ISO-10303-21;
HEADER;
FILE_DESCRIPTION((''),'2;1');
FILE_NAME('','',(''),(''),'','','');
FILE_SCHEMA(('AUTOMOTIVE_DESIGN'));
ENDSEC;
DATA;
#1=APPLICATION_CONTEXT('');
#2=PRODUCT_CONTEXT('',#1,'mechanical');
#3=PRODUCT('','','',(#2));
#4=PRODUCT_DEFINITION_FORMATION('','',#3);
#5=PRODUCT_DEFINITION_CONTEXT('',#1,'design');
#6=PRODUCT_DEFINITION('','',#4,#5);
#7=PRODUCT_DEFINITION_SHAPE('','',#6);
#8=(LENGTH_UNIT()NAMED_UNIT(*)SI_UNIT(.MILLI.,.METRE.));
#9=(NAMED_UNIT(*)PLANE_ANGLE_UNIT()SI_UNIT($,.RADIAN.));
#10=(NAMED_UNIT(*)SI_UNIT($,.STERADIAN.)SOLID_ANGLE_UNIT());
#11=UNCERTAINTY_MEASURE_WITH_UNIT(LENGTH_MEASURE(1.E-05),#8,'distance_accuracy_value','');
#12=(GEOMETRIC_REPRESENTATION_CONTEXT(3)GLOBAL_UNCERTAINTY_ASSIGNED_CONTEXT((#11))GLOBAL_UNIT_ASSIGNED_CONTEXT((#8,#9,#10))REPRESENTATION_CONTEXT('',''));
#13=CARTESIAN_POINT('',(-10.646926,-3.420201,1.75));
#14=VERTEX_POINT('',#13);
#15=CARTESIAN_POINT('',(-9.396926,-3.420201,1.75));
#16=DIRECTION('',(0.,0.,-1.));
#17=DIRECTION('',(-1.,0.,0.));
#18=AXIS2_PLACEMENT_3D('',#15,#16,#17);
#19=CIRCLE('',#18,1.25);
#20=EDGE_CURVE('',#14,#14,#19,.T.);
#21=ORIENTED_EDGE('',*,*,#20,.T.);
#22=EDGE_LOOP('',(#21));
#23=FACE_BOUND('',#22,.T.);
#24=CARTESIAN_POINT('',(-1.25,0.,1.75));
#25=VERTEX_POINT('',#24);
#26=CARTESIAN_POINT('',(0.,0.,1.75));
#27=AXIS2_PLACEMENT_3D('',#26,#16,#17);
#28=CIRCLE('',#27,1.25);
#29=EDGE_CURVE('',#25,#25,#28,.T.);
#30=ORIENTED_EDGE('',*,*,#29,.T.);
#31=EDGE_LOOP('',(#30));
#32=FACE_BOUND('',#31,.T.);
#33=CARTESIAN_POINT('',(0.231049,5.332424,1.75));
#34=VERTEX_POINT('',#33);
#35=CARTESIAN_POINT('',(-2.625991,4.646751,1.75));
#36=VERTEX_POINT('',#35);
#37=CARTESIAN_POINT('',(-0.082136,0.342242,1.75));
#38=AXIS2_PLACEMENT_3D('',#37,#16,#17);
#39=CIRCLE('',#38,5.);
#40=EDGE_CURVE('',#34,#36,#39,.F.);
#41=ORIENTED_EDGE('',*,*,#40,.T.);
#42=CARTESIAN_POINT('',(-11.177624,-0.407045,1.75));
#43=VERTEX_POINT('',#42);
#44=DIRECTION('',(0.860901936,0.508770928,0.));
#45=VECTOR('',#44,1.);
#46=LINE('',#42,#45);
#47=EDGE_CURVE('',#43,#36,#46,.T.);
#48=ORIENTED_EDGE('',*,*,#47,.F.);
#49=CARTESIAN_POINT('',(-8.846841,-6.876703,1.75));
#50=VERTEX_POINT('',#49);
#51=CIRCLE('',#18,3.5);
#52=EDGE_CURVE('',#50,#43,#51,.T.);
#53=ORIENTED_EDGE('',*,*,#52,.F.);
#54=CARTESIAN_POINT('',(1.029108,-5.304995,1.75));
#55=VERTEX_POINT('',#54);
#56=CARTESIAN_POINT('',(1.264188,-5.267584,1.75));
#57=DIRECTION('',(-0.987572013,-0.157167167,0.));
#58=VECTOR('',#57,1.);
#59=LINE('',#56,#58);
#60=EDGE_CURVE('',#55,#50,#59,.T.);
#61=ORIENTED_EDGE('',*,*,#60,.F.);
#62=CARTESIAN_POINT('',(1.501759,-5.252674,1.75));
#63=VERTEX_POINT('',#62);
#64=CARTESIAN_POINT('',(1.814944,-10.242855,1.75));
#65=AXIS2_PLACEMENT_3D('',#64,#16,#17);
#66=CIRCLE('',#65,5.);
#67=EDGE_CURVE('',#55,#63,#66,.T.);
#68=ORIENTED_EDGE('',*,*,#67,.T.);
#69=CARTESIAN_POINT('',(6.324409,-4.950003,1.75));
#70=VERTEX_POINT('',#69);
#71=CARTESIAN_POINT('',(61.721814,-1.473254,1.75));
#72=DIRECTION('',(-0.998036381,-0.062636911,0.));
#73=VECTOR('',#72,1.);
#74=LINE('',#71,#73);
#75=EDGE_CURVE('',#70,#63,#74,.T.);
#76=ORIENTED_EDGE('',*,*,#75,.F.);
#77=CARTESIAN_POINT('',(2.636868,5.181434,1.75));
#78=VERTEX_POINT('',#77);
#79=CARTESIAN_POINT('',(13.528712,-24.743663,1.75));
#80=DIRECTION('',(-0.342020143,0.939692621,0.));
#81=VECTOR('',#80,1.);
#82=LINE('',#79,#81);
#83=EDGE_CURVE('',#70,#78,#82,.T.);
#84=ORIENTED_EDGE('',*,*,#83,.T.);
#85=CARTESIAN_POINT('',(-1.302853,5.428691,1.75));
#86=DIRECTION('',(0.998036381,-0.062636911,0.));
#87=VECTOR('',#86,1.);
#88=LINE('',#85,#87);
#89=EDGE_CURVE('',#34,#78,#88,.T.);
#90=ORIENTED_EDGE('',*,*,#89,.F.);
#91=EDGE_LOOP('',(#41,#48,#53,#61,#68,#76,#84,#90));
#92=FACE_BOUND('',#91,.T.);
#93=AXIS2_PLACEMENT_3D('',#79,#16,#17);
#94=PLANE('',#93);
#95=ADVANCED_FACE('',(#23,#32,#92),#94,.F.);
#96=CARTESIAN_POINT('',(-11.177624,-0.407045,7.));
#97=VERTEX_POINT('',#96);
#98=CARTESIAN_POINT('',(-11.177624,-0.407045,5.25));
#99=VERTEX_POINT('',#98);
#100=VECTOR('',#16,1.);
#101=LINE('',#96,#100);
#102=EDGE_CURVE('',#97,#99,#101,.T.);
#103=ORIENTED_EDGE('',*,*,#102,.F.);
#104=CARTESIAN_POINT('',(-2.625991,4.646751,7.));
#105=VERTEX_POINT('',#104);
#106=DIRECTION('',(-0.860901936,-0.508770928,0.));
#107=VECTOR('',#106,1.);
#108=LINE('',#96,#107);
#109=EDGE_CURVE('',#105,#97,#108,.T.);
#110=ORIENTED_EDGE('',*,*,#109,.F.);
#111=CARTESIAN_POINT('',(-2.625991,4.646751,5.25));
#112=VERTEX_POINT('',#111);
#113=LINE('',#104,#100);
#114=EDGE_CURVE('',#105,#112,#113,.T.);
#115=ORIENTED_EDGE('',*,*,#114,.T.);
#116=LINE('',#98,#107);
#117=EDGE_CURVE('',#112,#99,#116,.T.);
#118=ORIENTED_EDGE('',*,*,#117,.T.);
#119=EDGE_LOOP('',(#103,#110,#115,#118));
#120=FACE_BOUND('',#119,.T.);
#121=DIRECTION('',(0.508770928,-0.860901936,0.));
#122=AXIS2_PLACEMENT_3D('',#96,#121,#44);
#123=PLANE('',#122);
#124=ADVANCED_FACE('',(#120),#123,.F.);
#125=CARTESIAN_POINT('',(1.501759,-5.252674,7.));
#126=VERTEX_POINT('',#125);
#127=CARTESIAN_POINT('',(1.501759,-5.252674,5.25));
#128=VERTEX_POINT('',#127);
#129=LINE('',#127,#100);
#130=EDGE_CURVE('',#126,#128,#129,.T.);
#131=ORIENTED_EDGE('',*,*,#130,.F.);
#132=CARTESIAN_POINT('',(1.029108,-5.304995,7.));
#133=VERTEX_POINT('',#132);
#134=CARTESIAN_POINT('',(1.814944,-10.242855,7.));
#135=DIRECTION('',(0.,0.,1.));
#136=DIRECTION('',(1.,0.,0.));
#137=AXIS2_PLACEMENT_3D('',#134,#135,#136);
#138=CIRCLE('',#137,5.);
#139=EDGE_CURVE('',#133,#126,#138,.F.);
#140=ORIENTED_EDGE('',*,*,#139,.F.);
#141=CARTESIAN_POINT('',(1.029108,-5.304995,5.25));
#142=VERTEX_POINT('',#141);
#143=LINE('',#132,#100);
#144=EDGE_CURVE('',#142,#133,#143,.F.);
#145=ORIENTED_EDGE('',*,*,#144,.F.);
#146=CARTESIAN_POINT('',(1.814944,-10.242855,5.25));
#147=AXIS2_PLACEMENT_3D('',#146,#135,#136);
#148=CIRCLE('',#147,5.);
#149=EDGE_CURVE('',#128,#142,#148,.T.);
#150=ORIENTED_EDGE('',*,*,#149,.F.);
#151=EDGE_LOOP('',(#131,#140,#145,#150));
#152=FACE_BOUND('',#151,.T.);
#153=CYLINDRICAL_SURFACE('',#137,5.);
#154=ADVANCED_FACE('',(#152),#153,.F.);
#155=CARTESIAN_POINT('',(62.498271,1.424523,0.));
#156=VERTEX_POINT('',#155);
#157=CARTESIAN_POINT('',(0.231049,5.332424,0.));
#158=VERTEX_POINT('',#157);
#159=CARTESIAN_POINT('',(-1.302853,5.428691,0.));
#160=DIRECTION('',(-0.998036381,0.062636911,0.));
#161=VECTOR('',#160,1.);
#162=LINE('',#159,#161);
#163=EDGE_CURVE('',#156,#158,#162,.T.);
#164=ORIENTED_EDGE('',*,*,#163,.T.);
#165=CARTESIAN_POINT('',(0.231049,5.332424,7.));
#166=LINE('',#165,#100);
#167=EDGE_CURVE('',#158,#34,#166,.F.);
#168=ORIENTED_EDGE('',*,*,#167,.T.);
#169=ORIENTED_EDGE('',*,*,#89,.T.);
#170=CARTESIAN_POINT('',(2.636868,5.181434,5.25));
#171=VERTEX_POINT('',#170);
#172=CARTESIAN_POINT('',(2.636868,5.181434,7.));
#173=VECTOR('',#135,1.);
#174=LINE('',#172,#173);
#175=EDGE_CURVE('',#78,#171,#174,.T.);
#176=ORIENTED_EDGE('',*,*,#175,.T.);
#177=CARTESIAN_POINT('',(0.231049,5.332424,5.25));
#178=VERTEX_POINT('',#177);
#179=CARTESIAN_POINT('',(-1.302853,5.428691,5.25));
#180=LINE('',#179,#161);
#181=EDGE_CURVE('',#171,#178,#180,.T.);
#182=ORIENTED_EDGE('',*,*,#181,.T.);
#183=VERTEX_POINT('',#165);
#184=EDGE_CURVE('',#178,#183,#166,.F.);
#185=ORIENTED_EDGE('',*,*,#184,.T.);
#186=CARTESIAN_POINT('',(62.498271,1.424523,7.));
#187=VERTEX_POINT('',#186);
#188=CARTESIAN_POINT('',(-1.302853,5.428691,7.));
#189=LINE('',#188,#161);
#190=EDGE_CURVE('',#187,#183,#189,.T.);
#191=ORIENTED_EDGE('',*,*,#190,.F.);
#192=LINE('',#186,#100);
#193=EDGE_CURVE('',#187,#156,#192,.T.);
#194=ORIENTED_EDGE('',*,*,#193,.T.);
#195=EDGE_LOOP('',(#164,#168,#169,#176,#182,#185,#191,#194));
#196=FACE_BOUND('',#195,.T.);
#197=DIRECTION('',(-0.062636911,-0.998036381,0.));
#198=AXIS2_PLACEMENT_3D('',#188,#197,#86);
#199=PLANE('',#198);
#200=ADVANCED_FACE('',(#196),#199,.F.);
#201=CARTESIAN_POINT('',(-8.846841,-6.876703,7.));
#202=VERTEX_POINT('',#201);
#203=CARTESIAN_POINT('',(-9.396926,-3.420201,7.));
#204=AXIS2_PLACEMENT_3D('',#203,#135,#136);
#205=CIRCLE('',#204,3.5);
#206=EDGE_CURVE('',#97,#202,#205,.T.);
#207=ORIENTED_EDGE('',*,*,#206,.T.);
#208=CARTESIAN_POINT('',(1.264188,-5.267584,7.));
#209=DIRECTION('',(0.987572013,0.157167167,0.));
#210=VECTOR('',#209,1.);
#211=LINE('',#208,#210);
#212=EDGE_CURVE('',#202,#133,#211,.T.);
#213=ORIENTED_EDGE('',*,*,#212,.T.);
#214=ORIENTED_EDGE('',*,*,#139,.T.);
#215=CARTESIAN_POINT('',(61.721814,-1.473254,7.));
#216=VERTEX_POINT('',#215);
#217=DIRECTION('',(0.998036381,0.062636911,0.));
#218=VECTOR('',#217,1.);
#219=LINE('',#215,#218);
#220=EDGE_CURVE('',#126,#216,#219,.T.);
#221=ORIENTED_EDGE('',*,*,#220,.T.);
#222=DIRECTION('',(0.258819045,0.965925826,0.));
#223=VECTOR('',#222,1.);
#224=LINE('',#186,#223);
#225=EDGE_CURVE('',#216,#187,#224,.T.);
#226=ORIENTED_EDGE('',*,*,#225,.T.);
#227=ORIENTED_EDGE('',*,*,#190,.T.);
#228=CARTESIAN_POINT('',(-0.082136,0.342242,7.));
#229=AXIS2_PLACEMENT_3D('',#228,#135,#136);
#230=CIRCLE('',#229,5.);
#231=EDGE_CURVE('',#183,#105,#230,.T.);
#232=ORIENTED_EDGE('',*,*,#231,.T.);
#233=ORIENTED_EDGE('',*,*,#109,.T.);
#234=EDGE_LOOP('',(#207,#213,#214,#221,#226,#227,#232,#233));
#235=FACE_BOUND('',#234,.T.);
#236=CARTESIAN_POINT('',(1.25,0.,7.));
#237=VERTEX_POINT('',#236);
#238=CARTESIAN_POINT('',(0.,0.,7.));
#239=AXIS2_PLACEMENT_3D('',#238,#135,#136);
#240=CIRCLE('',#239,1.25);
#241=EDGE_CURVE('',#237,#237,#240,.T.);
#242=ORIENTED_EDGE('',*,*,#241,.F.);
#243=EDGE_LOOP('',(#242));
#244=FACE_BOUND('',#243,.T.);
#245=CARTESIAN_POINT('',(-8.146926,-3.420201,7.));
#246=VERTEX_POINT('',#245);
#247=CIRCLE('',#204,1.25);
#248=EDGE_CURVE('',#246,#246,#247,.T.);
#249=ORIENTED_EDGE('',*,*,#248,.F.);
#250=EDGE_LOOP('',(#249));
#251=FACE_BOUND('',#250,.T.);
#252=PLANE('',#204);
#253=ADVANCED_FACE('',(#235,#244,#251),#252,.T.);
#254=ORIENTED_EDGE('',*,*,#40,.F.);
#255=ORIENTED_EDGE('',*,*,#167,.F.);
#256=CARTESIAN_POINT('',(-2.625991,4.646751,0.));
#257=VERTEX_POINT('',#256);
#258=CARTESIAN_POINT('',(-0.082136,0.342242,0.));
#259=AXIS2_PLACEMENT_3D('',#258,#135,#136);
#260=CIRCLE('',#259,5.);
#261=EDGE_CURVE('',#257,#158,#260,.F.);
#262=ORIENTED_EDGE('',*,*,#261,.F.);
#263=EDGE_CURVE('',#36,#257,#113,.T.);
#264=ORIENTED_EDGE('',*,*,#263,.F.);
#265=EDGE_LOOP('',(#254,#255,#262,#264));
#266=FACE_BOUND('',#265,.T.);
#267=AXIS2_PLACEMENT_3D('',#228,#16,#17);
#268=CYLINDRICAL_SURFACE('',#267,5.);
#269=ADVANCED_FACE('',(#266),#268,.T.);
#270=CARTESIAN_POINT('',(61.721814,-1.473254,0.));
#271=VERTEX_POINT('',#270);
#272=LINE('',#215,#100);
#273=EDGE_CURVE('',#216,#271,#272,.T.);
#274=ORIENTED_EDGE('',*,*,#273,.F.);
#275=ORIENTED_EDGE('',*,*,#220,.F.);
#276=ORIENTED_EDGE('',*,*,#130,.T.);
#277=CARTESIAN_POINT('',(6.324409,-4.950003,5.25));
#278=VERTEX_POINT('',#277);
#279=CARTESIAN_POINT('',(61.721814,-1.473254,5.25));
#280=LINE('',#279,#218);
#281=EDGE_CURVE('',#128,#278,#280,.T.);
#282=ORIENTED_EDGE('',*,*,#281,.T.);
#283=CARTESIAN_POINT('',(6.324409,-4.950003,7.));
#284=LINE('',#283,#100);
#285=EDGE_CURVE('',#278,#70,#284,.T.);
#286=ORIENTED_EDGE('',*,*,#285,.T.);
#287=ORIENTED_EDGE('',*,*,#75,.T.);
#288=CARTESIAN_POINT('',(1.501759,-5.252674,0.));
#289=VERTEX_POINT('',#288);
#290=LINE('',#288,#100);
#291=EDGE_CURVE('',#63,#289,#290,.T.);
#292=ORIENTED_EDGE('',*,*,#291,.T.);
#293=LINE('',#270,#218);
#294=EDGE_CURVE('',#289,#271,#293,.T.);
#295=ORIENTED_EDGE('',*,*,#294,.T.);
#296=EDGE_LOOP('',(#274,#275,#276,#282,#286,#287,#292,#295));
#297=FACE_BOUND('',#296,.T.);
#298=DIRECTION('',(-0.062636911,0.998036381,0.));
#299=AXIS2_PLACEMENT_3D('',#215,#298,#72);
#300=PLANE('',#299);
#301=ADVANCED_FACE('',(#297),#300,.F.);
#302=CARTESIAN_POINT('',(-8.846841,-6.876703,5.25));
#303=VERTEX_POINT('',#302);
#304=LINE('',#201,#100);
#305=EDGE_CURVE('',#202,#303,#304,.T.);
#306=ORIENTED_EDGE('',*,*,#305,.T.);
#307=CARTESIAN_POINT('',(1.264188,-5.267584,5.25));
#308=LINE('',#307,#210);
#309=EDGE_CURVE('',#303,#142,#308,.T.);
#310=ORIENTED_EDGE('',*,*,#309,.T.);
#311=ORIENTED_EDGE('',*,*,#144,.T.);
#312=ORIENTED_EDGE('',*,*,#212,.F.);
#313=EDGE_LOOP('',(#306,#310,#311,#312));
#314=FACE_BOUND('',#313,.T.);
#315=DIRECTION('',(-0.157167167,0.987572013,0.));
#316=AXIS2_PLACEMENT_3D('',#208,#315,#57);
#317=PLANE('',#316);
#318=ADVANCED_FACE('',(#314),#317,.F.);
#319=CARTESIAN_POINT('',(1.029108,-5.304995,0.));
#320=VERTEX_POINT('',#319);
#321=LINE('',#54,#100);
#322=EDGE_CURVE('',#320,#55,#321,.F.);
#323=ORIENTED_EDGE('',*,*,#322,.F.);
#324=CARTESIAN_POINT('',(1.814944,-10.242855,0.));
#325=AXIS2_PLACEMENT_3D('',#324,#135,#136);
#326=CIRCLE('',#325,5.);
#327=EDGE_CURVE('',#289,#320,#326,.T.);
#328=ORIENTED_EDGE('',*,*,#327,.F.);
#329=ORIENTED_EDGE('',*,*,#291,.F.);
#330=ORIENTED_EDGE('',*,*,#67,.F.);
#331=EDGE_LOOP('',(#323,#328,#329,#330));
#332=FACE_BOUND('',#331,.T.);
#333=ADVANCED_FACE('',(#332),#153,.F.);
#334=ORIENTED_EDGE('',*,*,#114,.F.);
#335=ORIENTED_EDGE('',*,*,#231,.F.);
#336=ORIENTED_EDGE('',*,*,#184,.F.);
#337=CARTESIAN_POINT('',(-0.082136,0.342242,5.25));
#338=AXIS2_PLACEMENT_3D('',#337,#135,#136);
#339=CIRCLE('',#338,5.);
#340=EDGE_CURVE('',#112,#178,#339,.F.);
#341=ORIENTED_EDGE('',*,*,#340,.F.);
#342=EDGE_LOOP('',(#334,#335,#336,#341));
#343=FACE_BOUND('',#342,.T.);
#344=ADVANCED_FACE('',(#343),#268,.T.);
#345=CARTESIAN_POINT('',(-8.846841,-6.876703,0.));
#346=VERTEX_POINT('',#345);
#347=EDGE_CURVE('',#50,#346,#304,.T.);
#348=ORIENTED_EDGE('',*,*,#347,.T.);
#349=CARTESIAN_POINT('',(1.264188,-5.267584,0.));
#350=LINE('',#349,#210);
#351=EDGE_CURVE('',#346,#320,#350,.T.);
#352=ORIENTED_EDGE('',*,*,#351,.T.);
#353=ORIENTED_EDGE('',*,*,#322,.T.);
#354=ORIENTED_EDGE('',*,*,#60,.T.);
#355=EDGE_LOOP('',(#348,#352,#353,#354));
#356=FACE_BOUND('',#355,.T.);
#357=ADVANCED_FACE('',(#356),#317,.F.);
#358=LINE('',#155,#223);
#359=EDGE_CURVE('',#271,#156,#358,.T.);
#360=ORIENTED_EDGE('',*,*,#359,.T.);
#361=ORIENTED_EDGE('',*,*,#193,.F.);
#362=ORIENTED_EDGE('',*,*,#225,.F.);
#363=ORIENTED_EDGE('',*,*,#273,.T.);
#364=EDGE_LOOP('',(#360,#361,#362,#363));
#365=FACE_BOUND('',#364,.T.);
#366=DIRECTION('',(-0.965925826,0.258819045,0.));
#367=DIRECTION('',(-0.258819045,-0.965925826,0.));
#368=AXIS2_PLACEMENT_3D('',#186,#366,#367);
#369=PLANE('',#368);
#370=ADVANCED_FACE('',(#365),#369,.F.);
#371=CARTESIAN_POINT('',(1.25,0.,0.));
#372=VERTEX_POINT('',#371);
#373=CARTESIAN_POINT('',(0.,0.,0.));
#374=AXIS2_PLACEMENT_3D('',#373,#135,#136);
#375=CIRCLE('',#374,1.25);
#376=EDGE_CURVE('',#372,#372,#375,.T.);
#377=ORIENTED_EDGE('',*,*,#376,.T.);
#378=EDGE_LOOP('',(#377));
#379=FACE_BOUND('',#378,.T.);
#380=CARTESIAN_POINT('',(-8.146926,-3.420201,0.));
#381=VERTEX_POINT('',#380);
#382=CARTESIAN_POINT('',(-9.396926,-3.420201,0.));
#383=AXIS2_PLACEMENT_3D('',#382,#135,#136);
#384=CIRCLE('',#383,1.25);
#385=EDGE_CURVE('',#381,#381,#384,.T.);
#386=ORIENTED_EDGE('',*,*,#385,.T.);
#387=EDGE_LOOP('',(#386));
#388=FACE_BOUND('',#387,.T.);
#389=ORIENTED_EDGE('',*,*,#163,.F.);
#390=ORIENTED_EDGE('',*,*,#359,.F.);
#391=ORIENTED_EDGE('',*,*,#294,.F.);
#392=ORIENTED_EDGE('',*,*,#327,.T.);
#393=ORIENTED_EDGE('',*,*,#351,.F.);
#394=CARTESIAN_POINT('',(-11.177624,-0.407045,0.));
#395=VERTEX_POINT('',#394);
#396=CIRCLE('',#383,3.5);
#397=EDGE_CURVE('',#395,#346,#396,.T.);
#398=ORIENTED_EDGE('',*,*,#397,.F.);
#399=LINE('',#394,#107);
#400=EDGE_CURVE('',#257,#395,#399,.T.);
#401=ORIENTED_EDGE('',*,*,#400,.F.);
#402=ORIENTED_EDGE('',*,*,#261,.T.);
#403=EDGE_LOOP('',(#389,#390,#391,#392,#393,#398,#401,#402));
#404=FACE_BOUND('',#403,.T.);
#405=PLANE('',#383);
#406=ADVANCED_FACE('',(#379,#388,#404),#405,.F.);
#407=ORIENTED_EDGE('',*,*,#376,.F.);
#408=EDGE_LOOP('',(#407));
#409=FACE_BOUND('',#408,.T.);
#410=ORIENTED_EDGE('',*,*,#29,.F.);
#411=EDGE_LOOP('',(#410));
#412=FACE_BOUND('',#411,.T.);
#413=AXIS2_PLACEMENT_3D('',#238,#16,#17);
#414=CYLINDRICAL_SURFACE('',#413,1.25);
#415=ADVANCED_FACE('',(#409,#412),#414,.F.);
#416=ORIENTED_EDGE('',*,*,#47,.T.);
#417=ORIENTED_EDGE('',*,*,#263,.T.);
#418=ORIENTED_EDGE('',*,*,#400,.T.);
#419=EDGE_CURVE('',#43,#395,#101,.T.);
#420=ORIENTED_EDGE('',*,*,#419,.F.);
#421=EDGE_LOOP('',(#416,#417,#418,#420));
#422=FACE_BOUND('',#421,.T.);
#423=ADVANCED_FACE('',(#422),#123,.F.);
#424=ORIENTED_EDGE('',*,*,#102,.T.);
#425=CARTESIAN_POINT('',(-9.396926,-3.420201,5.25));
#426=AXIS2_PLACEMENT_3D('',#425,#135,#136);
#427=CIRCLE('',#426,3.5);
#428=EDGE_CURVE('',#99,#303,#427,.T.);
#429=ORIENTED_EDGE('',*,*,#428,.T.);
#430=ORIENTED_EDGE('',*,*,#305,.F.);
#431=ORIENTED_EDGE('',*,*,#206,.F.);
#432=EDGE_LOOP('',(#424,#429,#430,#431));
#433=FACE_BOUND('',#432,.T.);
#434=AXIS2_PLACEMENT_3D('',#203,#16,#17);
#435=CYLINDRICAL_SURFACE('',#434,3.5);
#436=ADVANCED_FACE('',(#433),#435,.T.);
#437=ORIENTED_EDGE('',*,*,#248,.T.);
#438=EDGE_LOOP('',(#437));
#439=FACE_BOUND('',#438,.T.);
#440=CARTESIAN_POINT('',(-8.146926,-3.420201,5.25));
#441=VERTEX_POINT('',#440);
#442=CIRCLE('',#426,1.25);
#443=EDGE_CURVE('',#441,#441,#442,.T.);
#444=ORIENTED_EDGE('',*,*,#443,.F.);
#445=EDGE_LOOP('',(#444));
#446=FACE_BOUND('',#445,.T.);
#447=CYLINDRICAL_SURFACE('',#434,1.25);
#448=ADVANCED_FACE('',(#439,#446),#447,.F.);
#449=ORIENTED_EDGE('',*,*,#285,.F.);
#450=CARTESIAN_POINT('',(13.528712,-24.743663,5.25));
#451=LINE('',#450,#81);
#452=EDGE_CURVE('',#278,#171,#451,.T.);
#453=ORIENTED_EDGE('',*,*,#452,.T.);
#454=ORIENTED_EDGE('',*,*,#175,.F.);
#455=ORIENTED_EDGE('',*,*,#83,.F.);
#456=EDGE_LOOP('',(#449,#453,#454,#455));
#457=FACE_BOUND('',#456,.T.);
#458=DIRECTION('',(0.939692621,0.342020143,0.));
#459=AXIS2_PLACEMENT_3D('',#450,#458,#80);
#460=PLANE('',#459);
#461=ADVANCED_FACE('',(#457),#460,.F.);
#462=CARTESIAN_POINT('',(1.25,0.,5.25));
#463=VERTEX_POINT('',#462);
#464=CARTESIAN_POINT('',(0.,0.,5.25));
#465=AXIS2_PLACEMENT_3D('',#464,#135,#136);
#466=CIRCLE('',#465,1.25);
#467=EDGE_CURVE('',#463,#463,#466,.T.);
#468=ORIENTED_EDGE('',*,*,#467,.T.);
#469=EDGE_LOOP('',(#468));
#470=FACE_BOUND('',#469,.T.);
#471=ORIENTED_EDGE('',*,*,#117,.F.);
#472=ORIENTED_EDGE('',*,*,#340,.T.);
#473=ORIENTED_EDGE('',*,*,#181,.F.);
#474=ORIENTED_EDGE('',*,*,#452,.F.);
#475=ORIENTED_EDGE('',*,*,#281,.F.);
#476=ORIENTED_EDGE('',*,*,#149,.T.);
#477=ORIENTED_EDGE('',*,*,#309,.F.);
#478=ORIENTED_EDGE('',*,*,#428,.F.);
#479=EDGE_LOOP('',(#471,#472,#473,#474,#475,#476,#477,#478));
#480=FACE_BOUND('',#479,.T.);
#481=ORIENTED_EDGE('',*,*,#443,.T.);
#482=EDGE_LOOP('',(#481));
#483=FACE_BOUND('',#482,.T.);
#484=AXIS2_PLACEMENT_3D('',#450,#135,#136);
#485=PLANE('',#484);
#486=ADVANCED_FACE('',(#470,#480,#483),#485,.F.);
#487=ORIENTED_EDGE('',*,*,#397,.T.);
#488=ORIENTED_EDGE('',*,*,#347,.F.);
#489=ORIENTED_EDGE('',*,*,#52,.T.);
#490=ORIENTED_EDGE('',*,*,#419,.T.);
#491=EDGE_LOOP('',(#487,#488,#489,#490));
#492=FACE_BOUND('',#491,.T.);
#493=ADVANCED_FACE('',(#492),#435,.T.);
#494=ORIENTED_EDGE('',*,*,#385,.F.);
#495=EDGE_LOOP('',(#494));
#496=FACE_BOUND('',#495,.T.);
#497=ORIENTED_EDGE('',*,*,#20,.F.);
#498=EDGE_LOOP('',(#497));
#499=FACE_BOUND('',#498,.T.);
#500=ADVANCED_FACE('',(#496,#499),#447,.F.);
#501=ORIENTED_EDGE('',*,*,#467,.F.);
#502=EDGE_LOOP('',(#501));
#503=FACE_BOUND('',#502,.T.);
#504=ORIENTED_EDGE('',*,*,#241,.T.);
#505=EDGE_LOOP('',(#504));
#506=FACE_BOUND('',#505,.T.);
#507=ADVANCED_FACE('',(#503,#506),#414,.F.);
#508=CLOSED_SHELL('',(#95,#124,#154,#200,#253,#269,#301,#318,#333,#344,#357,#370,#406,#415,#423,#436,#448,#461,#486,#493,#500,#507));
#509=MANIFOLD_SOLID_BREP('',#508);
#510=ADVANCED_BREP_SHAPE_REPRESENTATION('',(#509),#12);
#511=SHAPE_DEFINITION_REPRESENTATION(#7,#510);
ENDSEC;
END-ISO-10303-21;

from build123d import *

# Parameters (mm, degrees)
SKETCH1_R               = 1.25
BOSS_EXTRUDE1_DEPTH     = 7
CUT_EXTRUDE1_DEPTH      = 63.812268863
CUT_EXTRUDE1_DEPTH_BACK = 63.812268863
SKETCH2_W               = 32.592394384
SKETCH2_H               = 3.5
FILLET1_R               = 5


with BuildPart() as part:
    # Sketch1 → Boss-Extrude1 (new body)
    with BuildSketch(Plane.XY):
        with BuildLine():
            Line((61.721813599, -1.473254022), (1.264188363, -5.267583503))
            Line((1.264188363, -5.267583503), (-8.846841125, -6.87670348))
            ThreePointArc((-8.846841125, -6.87670348), (-12.689755312, -4.606488283), (-11.177624454, -0.407044658))
            Line((-11.177624454, -0.407044658), (-1.302853294, 5.428691416))
            Line((-1.302853294, 5.428691416), (62.498270735, 1.424523457))
            Line((62.498270735, 1.424523457), (61.721813599, -1.473254022))
        make_face()
        Circle(SKETCH1_R, mode=Mode.SUBTRACT)
        with Locations((-9.396926208, -3.420201433)):
            Circle(SKETCH1_R, mode=Mode.SUBTRACT)
    extrude(amount=BOSS_EXTRUDE1_DEPTH)

    # Sketch2 → Cut-Extrude1 (cut, two sides: drawn at the far end of the back side and taken through both)
    with BuildSketch(Plane(origin=(0.427525179, -1.174615776, 0), x_dir=(0.9396926207859082, 0.3420201433256693, 0), z_dir=(-0.3420201433256693, 0.9396926207859082, 0)).offset(-CUT_EXTRUDE1_DEPTH_BACK)):
        with Locations((-12.046197192, -3.5)):
            Rectangle(SKETCH2_W, SKETCH2_H)
    extrude(amount=CUT_EXTRUDE1_DEPTH + CUT_EXTRUDE1_DEPTH_BACK, mode=Mode.SUBTRACT)

    # Fillet1
    # the kernel refuses this fillet: 5 mm, written as the material it adds along each edge
    with BuildSketch(Plane(origin=(1.264188363, -5.267583503, 5.25), x_dir=(0.9980363808193768, 0.06263691053172936, 0), z_dir=(0, 0, 1)), Plane(origin=(1.264188363, -5.267583503, 0), x_dir=(0.9980363808193768, 0.06263691053172936, 0), z_dir=(0, 0, 1))) as fillet1_piece_1:
        with BuildLine():
            CenterArc((FILLET1_R * 0.0476077036938, -FILLET1_R), FILLET1_R, 90, 5.45132501)
            Line((-FILLET1_R * 0.0473923866113, -FILLET1_R * 0.00452273615014), (0, 0))
            Line((0, 0), (FILLET1_R * 0.0476077036938, 0))
        make_face()
    extrude(amount=1.75)
    # the kernel refuses this fillet: 5 mm, written as the material it takes off along each edge
    with BuildSketch(Plane(origin=(-1.302853294, 5.428691416, 1.407700386), x_dir=(0.9980363808193763, -0.06263691053173732, 0), z_dir=(0, 0, 1))) as fillet1_2_piece_1:
        with BuildLine():
            CenterArc((FILLET1_R * 0.3073839691, -FILLET1_R), FILLET1_R, 90, 34.173177968)
            Line((-FILLET1_R * 0.254312163661, -FILLET1_R * 0.172656386716), (0, 0))
            Line((0, 0), (FILLET1_R * 0.3073839691, 0))
        make_face()
    extrude(amount=9.434599227, mode=Mode.SUBTRACT)
    with BuildSketch(Plane(origin=(-1.302853294, 5.428691416, -3.842299614), x_dir=(-0.8609019359097801, -0.5087709275762453, 0), z_dir=(0, 0, 1))) as fillet1_2_piece_2:
        with BuildLine():
            CenterArc((FILLET1_R * 0.3073839691, FILLET1_R), FILLET1_R, 235.826822032, 34.173177968)
            Line((-FILLET1_R * 0.254312163661, FILLET1_R * 0.172656386716), (0, 0))
            Line((0, 0), (FILLET1_R * 0.3073839691, 0))
        make_face()
    extrude(amount=9.434599227, mode=Mode.SUBTRACT)


solid = part.part
